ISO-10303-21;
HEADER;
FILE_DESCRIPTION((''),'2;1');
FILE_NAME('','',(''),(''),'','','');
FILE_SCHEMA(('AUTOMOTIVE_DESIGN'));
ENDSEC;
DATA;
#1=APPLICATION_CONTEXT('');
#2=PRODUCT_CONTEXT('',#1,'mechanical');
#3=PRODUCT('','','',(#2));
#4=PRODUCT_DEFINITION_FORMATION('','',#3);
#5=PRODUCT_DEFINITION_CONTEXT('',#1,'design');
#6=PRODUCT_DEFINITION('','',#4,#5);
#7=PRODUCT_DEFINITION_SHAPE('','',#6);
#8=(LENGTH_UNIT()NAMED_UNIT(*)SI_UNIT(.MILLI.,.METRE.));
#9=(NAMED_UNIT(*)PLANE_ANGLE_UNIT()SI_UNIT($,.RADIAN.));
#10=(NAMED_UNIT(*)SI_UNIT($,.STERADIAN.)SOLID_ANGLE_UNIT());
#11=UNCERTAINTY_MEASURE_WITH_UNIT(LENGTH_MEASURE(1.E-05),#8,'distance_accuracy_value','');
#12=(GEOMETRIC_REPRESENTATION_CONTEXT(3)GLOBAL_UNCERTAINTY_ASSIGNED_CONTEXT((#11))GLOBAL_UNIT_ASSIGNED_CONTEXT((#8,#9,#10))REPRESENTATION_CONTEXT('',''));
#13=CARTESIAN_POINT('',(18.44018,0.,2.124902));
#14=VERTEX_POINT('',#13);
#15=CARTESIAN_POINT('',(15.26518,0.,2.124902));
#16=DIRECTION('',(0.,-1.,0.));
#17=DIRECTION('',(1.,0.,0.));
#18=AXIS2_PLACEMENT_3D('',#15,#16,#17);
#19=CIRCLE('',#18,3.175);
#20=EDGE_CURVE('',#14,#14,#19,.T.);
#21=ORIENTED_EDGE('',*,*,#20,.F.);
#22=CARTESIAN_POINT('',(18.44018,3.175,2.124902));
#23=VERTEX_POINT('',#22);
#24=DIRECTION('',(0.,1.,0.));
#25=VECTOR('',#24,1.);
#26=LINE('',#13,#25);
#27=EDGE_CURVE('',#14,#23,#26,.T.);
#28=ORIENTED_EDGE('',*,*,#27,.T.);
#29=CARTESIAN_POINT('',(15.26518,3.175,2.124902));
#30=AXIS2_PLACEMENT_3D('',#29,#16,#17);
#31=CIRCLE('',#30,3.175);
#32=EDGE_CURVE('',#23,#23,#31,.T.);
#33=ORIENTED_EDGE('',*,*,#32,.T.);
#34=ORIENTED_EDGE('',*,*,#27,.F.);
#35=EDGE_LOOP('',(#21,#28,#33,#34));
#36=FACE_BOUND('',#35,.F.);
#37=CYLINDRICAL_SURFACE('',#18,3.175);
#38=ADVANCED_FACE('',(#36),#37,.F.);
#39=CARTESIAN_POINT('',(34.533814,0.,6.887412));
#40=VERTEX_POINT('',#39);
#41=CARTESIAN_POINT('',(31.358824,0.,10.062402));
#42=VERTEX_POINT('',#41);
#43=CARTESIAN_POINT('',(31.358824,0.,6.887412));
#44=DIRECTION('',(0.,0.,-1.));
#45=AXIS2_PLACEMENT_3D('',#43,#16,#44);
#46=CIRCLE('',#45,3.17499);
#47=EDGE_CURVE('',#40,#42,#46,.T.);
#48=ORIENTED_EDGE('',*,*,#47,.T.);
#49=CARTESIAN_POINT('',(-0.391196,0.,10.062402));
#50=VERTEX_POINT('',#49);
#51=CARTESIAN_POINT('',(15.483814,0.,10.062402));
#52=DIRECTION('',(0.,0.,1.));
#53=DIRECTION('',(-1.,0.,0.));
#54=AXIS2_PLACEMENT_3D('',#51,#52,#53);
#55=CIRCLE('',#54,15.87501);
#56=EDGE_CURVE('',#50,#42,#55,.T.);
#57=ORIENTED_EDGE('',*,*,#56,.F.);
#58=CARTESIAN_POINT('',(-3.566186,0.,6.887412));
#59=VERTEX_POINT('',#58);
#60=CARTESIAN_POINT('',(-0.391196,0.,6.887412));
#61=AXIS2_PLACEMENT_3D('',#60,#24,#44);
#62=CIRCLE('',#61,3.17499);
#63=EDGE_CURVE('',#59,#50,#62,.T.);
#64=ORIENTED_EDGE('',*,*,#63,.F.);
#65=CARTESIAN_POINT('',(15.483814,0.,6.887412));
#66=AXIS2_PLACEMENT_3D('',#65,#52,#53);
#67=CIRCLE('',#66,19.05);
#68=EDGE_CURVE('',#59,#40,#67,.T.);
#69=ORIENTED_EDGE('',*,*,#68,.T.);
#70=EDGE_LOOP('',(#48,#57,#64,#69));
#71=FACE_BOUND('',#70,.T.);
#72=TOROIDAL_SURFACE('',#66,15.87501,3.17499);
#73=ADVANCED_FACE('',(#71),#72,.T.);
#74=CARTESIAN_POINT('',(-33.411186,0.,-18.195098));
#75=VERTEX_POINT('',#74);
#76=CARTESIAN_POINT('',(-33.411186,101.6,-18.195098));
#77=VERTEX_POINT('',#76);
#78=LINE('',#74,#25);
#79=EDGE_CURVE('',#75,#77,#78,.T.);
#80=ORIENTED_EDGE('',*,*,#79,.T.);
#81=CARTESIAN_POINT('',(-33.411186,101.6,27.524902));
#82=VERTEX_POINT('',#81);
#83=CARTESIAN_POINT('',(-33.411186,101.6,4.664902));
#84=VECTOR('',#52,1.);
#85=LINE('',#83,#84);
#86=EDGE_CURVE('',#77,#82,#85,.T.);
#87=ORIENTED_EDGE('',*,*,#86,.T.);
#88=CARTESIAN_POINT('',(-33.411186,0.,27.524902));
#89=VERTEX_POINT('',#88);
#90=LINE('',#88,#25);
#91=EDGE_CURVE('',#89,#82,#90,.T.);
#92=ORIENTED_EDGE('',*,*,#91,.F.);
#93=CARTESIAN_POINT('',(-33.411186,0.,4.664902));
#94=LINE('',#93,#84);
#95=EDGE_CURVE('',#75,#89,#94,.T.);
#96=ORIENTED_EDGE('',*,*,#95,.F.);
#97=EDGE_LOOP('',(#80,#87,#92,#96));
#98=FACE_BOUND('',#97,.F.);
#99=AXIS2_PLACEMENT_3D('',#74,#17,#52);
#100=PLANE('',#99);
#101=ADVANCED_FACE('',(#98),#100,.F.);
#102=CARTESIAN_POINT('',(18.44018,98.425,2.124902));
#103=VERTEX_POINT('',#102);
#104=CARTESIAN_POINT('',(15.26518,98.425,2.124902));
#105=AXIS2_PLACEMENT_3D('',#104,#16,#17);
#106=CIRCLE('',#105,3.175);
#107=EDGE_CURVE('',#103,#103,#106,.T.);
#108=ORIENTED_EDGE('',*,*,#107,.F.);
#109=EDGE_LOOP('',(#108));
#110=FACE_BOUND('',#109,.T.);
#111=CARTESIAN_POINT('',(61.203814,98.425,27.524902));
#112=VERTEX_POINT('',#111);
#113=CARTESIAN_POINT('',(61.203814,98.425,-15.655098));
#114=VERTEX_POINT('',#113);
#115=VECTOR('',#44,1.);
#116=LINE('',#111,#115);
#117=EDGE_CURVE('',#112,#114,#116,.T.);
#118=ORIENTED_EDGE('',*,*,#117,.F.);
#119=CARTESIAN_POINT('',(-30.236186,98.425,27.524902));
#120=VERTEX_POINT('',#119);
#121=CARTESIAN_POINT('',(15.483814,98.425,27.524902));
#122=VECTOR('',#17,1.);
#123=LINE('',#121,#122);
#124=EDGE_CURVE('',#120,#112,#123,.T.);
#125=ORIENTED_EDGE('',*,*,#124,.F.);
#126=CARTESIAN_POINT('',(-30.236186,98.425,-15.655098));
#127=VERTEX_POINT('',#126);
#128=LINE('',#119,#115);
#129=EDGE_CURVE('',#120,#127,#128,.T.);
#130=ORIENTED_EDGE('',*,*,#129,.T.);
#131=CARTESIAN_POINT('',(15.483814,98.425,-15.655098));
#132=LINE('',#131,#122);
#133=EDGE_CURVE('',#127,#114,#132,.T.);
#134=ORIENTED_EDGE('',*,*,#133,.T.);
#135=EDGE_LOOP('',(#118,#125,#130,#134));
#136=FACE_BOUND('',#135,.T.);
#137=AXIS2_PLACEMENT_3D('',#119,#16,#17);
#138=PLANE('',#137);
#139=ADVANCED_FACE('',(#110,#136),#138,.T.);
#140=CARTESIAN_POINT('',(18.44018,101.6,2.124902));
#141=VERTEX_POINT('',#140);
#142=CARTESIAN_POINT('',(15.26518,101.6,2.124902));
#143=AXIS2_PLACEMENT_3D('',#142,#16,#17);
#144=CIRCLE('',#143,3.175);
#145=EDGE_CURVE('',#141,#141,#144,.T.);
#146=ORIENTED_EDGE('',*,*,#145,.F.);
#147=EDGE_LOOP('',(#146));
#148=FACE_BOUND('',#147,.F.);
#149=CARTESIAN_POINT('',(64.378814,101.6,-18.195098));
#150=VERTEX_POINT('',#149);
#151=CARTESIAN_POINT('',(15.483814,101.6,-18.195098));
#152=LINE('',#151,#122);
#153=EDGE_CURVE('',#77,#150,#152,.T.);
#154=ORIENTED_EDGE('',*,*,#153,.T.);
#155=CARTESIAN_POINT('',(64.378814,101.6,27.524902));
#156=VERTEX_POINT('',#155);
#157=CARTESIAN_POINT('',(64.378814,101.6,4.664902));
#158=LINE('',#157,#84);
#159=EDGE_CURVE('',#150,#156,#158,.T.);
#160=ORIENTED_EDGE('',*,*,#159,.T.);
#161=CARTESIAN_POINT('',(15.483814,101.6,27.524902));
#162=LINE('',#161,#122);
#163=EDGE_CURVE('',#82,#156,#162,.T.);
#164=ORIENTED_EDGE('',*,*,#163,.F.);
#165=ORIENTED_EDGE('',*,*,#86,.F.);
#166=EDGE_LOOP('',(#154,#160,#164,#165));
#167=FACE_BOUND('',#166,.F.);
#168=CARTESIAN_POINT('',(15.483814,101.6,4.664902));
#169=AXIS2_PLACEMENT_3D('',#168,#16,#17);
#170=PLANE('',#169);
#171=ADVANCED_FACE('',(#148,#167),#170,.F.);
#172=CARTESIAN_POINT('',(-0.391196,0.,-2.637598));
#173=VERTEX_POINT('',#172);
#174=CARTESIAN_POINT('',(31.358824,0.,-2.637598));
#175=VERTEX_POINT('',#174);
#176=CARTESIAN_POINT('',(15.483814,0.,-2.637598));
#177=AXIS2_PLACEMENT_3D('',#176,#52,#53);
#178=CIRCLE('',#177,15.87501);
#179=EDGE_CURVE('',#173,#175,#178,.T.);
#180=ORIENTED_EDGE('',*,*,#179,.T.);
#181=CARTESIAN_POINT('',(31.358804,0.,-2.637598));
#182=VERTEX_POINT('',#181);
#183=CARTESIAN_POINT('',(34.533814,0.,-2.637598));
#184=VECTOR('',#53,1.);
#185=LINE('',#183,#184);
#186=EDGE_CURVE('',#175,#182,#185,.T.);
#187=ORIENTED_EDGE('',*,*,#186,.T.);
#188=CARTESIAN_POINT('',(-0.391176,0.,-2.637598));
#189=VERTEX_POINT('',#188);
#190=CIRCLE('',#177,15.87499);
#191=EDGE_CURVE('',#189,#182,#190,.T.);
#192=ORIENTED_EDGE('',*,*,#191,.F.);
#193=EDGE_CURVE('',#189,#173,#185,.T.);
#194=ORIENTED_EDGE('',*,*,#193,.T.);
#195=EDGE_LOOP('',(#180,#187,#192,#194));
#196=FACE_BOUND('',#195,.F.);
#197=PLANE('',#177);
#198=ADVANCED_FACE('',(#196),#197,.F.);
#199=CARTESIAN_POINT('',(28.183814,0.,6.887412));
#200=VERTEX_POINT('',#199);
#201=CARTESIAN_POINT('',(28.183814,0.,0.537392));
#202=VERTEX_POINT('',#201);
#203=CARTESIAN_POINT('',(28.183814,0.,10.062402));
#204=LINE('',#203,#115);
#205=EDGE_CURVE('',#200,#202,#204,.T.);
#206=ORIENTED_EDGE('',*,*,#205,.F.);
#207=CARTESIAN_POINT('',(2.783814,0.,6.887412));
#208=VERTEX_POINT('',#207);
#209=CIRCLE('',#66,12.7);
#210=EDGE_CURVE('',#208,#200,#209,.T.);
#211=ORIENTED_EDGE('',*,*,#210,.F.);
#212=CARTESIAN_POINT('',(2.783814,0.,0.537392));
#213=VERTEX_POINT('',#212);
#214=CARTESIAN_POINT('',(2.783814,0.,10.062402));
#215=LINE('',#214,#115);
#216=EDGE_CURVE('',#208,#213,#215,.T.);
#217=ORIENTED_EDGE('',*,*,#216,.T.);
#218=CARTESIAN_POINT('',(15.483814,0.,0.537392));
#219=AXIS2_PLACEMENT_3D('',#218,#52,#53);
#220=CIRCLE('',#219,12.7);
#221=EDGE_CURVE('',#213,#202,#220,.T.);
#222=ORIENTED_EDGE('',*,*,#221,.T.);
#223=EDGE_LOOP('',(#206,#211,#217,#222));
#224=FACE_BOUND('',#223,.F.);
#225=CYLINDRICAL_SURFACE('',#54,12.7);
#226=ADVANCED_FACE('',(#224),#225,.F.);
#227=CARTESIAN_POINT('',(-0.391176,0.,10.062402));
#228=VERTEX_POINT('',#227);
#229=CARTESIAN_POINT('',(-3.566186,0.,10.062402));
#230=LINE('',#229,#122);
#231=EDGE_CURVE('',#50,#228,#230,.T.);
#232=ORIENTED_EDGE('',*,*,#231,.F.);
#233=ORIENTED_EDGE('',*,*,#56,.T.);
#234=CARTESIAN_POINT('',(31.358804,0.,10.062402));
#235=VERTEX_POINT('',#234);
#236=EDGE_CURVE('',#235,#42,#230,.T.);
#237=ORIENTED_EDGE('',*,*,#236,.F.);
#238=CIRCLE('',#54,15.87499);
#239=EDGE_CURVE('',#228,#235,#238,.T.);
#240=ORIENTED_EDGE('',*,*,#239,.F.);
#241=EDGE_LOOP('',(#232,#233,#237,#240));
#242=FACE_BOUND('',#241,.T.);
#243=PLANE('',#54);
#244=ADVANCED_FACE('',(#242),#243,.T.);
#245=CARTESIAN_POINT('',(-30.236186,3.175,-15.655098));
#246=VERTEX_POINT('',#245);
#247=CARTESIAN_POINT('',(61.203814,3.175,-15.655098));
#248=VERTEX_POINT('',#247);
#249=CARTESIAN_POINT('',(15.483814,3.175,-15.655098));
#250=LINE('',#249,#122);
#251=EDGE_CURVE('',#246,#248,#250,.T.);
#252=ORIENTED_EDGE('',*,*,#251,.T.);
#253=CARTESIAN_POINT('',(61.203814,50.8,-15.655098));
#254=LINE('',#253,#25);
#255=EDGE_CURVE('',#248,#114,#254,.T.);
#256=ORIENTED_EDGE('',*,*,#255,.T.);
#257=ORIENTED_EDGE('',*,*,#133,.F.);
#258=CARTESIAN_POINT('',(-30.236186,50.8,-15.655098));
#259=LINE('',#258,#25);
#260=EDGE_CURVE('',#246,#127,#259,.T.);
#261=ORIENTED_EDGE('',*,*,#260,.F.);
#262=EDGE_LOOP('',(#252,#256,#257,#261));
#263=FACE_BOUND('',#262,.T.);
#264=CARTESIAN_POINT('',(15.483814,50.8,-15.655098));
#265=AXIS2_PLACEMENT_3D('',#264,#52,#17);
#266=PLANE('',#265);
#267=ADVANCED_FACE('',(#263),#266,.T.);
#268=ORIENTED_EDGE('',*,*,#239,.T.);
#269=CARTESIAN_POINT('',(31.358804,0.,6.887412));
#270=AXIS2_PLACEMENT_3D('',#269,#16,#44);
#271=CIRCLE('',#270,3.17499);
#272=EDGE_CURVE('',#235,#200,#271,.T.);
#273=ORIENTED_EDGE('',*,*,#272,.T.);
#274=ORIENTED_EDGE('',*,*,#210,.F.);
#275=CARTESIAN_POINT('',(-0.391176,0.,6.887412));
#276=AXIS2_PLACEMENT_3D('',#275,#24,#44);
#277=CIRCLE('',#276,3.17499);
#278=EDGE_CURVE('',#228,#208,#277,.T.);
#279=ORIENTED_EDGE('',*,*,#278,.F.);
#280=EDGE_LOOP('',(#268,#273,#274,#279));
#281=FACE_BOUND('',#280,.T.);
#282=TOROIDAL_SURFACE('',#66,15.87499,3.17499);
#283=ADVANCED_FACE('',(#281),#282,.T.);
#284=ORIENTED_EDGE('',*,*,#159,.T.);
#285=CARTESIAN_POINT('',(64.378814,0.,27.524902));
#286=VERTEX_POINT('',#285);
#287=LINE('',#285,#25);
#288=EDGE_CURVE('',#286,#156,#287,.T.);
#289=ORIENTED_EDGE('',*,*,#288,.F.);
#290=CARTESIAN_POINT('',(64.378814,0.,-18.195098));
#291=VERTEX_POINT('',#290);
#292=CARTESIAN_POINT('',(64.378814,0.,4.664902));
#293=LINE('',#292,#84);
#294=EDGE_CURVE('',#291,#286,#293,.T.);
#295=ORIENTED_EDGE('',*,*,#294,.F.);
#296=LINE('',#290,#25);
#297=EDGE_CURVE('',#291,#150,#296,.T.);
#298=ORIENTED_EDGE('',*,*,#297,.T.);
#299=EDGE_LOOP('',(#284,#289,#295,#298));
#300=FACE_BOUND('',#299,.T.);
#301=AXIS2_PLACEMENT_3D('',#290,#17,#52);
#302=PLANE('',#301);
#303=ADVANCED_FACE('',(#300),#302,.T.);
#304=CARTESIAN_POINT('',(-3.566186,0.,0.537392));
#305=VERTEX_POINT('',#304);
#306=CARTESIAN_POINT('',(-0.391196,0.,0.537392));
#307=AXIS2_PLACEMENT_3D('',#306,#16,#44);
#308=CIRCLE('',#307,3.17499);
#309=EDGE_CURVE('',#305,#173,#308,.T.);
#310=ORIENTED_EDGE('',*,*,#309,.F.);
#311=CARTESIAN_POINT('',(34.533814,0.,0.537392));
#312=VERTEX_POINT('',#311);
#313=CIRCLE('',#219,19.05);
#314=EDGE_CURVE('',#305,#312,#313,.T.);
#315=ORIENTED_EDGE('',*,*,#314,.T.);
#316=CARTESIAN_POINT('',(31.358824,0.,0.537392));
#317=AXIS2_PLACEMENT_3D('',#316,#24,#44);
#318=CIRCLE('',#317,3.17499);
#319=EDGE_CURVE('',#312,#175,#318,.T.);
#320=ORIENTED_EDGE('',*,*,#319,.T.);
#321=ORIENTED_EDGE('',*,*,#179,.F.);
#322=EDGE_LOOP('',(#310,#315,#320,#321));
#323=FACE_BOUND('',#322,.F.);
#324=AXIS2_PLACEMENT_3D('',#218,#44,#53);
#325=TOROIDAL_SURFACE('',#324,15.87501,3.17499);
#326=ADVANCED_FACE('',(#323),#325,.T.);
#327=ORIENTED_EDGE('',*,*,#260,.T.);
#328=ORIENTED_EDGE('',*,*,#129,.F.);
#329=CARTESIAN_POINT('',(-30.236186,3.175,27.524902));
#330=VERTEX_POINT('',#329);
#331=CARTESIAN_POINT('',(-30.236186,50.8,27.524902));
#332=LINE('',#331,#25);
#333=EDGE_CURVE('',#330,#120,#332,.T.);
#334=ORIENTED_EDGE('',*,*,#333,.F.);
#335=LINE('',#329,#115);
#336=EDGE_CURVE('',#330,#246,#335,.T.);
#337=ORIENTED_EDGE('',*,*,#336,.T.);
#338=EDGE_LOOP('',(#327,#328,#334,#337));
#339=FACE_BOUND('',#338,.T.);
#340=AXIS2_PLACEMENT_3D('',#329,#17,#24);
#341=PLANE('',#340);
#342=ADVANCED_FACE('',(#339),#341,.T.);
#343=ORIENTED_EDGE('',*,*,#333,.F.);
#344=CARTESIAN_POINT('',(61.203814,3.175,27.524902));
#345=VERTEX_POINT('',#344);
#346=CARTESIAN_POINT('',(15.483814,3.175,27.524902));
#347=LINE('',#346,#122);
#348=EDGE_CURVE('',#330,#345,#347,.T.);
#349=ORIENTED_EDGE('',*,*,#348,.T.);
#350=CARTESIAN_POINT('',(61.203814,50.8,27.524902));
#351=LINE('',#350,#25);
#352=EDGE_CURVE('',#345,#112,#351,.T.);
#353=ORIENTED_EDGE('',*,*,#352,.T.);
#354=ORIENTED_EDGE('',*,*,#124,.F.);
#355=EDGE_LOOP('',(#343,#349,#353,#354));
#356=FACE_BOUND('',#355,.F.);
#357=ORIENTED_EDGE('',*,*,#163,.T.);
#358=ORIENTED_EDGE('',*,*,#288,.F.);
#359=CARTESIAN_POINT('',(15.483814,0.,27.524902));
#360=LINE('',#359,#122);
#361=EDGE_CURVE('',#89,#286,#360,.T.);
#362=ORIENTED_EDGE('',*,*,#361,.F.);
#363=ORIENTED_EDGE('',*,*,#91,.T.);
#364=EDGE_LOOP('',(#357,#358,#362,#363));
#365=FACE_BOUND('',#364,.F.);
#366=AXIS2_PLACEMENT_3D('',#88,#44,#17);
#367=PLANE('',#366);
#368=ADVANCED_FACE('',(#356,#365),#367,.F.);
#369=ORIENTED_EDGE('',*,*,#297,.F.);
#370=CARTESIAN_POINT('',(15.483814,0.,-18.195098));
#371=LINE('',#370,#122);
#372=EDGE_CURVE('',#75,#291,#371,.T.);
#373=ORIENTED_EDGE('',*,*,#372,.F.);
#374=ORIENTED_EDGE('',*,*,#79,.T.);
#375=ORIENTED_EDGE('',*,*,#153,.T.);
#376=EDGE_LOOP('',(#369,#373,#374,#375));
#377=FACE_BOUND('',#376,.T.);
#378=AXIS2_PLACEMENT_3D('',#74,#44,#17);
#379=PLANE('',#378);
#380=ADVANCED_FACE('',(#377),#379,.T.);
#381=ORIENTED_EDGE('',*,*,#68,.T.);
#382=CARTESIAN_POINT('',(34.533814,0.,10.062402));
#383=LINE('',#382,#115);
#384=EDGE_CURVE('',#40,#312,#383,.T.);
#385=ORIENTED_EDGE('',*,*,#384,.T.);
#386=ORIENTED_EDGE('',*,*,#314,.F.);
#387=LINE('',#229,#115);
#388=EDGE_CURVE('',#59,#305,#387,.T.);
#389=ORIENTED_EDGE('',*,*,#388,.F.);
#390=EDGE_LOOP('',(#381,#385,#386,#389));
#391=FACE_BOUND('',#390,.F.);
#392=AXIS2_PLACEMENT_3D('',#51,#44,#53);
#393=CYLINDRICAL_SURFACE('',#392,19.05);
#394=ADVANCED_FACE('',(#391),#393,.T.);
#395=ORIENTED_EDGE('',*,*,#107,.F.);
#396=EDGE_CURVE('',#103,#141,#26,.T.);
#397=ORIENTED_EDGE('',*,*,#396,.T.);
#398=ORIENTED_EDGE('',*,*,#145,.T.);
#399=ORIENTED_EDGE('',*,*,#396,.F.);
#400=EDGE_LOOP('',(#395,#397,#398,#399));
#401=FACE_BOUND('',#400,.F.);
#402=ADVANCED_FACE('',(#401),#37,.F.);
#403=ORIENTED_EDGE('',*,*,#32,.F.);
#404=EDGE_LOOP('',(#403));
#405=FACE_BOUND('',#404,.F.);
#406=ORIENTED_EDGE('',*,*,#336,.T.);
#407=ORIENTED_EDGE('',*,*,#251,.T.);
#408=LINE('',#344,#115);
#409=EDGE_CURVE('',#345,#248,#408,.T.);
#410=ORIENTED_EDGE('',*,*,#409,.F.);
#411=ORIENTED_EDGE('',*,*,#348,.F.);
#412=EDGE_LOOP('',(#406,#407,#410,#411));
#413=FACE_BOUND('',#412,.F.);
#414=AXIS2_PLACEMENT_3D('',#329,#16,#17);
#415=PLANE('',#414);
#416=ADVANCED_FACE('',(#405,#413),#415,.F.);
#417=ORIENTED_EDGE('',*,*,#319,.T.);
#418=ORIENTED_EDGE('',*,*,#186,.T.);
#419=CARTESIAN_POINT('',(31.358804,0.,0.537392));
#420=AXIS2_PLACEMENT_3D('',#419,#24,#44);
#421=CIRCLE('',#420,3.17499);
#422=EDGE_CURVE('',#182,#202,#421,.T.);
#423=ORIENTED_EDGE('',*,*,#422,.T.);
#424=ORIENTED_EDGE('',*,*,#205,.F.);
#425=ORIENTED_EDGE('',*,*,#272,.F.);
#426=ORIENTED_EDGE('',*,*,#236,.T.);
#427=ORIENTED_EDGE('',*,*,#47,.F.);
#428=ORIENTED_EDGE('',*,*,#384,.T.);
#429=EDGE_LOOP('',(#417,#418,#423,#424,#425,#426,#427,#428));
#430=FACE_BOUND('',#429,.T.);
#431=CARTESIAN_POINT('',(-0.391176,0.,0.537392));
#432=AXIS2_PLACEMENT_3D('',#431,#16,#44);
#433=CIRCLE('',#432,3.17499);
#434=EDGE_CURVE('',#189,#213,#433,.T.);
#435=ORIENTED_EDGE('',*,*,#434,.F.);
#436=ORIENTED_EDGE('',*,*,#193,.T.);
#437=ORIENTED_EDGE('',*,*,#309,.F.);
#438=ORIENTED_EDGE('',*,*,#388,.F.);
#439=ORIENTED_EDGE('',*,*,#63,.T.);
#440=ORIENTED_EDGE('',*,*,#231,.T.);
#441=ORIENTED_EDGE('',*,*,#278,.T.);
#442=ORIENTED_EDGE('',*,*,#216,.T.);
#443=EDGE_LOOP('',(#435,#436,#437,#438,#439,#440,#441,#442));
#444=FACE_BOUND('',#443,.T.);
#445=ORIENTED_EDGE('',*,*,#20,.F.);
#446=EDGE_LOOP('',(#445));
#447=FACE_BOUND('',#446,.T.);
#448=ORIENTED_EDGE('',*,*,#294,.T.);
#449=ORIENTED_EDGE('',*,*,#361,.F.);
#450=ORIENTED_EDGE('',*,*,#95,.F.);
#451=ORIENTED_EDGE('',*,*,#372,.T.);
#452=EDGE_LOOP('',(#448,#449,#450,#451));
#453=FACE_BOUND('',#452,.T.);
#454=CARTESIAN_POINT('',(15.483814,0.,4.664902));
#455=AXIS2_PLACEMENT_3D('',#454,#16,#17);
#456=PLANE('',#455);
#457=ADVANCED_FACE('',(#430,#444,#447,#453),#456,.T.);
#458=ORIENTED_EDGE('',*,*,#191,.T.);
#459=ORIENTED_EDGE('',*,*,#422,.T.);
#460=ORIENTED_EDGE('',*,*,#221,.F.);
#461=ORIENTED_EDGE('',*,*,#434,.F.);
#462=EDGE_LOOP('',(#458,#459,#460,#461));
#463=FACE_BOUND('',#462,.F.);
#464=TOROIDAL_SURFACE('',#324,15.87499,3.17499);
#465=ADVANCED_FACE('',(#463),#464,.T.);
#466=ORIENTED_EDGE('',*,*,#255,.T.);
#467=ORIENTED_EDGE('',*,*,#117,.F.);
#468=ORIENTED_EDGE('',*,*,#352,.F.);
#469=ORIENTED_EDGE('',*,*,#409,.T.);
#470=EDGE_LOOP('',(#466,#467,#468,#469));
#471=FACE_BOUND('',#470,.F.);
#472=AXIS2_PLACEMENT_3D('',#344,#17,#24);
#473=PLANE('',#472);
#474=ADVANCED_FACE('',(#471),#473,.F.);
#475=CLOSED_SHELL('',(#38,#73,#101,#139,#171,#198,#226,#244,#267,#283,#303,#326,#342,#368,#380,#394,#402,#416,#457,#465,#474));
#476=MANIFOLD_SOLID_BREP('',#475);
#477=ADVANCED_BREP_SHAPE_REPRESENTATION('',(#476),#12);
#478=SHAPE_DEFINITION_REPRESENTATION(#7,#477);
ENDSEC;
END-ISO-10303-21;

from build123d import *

# Parameters (mm, degrees)
F0_W      = 97.79
F0_H      = 45.72
F1_DEPTH  = 101.6
F2_W      = 91.44
F2_H      = 95.25
F3_DEPTH  = 43.18
F4_W      = 19.05
F4_H      = 6.35
F5_ANGLE  = 180
F7_DEPTH  = 25.4
F8_R      = 3.17499
F10_D     = 6.35
F10_DEPTH = 101.601


# Not quite as in the source:
# - a fillet or chamfer is up to 0.001 mm smaller than in the source, because OpenCascade refuses the exact size


with BuildPart() as f1:
    # F0 (on Front) → F1 (new body)
    with BuildSketch(Plane.XZ):
        with Locations((15.4838143581, 4.6649015626)):
            Rectangle(F0_W, F0_H)
    extrude(amount=-F1_DEPTH)

    # F2 (on face) → F3 (cut)
    with BuildSketch(Plane.XY.offset(27.5249015626)):
        with Locations((15.4838143581, 50.8)):
            Rectangle(F2_W, F2_H)
    extrude(amount=-F3_DEPTH, mode=Mode.SUBTRACT)

    # F4 (on face) → F5 (revolve)
    with BuildSketch(Plane.XZ):
        with Locations((5.9588143581, 6.8874015626)):
            Rectangle(F4_W, F4_H)
        with Locations((5.9588143581, 0.5374015626)):
            Rectangle(F4_W, F4_H)
    revolve(axis=Axis((15.4838143581, 0, 3.7124015626), (0, 0, 1)), revolution_arc=F5_ANGLE)

    # F6 (on face) → F7 (cut)
    with BuildSketch(Plane.XY.offset(10.0624015626)):
        with BuildLine():
            Line((28.1838143581, 0), (2.7838143581, 0))
            ThreePointArc((2.7838143581, 0), (15.4838143581, -12.7), (28.1838143581, 0))
        make_face()
    extrude(amount=-F7_DEPTH, mode=Mode.SUBTRACT)

    # F8 (radius 3.175 in the source; OpenCascade refuses exactly that, so slightly less here)
    f8_edges = [f1.edges().sort_by_distance(p)[0] for p in [
        (15.483814, -19.05, 10.062402),
        (15.483814, -12.7, 10.062402),
        (15.483814, -19.05, -2.637598),
        (15.483814, -12.7, -2.637598),
    ]]
    fillet(f8_edges, radius=F8_R)

    # F10 (through all, one way)
    with BuildSketch(Plane.XZ):
        with Locations((15.265179798, 2.1249015626)):
            Circle(F10_D / 2)
    extrude(amount=-F10_DEPTH, mode=Mode.SUBTRACT)


solid = f1.part
